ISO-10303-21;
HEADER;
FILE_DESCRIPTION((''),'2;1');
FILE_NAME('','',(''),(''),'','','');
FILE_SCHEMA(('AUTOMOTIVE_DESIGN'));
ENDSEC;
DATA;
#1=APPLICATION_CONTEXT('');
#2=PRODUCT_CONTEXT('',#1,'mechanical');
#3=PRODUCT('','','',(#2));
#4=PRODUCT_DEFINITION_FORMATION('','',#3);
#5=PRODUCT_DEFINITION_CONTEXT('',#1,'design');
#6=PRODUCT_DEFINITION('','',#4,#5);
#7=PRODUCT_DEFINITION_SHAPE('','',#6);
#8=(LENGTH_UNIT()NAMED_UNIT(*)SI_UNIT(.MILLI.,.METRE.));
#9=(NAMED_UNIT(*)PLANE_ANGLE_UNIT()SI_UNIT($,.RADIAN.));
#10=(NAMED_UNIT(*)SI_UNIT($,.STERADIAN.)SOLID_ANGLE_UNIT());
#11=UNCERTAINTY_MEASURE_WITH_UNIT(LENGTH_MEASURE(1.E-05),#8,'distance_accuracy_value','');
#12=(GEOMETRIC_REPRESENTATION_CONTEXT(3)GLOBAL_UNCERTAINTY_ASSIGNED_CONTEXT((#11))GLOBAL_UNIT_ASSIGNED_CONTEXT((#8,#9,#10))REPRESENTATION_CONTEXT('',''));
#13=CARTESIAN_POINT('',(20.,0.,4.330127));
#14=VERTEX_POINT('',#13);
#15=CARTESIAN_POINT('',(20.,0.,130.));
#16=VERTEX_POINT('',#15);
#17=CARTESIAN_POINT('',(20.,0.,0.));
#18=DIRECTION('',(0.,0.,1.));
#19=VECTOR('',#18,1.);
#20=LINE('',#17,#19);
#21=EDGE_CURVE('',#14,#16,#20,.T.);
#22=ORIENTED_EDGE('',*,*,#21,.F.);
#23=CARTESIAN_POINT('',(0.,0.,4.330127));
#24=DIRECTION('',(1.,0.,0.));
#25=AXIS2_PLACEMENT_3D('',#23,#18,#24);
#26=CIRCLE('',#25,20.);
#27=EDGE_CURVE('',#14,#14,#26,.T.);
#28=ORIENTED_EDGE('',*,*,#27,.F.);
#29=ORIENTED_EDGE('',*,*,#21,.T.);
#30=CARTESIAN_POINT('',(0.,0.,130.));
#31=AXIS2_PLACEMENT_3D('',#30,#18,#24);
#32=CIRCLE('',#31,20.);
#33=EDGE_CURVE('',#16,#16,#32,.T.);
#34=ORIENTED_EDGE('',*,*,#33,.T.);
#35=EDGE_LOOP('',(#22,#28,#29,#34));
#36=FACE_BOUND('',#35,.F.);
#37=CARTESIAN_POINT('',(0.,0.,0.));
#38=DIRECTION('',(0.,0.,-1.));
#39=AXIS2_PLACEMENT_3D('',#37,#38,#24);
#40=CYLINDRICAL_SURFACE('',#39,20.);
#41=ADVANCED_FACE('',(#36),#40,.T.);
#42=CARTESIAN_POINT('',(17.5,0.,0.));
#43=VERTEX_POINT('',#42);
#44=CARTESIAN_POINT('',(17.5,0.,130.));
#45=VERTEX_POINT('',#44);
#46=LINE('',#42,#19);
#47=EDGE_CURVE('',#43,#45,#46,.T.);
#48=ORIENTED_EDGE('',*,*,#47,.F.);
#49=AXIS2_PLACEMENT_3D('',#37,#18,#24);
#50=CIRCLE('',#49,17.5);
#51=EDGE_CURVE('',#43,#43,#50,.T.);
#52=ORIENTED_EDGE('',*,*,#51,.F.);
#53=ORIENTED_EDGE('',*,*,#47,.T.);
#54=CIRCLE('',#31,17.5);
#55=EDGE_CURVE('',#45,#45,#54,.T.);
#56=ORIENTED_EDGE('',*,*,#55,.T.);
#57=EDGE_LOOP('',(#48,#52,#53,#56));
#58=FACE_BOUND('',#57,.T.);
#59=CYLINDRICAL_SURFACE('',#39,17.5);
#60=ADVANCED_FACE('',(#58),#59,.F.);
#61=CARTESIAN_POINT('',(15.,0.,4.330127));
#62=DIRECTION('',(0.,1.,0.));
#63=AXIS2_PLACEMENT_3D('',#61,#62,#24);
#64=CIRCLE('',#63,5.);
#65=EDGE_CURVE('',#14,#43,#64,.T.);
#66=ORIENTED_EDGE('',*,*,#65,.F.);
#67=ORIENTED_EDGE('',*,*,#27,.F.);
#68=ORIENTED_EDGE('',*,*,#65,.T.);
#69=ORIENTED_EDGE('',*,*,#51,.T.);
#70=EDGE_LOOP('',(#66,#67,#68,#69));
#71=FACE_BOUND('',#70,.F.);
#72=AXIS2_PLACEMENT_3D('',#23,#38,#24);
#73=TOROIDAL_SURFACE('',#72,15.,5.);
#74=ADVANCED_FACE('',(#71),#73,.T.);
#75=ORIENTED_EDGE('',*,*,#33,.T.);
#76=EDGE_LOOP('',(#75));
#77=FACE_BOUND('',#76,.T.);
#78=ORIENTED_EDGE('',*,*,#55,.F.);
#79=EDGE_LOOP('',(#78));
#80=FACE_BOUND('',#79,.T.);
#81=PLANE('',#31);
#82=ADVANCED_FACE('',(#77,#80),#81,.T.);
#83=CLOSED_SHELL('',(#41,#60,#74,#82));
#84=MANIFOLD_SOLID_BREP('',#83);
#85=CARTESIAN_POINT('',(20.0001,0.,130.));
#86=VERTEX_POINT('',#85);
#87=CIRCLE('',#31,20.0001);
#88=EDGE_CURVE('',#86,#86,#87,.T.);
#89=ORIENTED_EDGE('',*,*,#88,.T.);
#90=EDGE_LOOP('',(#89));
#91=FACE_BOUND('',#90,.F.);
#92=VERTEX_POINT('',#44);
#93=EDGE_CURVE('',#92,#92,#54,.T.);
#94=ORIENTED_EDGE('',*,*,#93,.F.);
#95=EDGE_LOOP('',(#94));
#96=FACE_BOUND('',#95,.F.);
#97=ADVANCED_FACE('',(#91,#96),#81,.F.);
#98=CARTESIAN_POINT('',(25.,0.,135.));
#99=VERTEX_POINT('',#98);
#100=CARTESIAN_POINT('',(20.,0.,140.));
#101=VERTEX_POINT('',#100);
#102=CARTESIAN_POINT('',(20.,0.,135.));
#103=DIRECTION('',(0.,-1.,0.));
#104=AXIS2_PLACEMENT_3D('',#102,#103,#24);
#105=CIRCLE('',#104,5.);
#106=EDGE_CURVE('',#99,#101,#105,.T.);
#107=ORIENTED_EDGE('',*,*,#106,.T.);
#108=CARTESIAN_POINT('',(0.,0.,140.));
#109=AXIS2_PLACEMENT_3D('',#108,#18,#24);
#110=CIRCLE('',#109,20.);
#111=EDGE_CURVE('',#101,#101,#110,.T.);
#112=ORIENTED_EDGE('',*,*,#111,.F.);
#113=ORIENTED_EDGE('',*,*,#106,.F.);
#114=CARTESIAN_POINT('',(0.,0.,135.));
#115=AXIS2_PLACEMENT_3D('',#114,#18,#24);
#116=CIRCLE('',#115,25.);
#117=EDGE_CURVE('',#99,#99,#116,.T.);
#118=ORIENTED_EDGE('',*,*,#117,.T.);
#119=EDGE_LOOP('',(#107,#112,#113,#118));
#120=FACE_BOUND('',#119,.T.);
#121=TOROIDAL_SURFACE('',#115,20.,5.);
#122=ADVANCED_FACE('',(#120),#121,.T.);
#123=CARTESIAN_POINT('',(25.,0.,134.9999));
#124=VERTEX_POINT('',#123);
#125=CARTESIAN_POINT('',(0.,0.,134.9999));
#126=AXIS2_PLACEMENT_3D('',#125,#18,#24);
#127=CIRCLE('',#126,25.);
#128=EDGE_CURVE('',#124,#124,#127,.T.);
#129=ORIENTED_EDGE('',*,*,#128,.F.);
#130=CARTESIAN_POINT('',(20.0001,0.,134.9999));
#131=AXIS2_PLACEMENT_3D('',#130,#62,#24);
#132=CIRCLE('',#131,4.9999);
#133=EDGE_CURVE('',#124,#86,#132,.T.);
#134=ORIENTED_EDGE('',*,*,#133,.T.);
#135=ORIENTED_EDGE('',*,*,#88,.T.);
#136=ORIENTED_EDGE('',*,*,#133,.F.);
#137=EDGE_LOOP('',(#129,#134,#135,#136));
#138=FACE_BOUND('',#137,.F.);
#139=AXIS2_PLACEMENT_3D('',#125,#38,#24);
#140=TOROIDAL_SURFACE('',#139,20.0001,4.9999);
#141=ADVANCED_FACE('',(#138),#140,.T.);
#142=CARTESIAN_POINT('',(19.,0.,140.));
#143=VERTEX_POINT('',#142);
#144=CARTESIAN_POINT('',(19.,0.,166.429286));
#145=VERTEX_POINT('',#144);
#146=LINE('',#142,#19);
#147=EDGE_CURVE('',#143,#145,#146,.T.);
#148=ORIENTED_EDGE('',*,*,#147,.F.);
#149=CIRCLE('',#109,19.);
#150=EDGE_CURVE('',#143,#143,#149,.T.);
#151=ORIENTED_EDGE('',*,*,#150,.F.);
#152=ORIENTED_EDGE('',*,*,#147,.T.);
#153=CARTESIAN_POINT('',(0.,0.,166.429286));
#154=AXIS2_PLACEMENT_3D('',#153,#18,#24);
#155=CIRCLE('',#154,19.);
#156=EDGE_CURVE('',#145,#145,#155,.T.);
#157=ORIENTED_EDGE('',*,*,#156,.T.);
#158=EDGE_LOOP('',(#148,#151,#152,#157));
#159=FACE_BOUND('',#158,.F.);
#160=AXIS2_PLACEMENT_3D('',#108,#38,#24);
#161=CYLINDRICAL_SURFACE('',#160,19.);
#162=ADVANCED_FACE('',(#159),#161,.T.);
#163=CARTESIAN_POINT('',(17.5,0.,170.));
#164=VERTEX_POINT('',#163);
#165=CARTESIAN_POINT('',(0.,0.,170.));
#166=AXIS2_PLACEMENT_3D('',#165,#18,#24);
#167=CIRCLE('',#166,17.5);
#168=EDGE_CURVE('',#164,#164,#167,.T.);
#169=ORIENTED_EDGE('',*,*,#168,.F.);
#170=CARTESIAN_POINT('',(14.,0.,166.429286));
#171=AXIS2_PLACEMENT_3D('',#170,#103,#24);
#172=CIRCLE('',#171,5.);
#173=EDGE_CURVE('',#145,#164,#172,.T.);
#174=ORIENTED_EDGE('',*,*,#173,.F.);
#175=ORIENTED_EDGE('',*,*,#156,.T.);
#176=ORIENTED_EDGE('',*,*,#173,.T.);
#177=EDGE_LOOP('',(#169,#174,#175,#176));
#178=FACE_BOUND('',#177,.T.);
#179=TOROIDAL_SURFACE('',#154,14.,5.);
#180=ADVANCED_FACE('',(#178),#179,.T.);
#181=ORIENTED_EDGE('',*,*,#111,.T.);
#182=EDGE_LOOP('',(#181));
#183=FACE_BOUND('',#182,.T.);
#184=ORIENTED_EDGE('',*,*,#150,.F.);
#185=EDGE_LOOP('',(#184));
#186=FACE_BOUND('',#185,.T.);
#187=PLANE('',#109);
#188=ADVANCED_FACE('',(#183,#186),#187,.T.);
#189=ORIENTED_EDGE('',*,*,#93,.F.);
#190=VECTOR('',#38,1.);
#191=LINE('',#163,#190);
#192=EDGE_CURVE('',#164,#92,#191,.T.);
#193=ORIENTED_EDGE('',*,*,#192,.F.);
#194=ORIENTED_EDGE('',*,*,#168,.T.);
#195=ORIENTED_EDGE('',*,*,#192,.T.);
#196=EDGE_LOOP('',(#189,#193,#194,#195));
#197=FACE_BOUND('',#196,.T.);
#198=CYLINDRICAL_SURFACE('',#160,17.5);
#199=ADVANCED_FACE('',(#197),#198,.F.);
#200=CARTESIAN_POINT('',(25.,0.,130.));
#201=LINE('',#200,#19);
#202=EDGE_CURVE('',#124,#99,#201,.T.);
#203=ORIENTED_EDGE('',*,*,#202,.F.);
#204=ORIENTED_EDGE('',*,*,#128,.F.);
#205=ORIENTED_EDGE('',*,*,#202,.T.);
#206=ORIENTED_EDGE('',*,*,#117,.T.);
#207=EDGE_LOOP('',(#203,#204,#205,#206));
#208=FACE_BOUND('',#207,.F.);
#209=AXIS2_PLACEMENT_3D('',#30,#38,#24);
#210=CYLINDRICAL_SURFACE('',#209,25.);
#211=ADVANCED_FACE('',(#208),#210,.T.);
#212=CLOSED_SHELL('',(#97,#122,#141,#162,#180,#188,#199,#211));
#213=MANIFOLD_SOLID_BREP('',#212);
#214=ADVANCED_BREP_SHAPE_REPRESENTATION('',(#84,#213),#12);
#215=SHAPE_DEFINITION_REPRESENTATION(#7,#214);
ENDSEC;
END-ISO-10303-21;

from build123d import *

# Parameters (mm, degrees)
F0_R      = 20
F0_R_2    = 17.5
F1_DEPTH  = 130
F2_R      = 25
F2_R_2    = 20
F2_R_3    = 17.5
F3_DEPTH  = 10
F4_R      = 19
F4_R_2    = 17.5
F5_DEPTH  = 30
F6_2_F1_R = 5
F6_2_F2_R = 4.9999


# Not quite as in the source:
# - a fillet or chamfer that OpenCascade refuses, or shapes differently, is made with other operations: its cross-section is extruded or revolved along the edge and cut away or added
# - a fillet or chamfer is up to 0.001 mm smaller than in the source, because OpenCascade refuses the exact size
# - a feature names something its author has since deleted; it is built from what else it names


with BuildPart() as f1:
    # F0 (on Top) → F1 (new body)
    with BuildSketch(Plane.XY):
        Circle(F0_R)
        Circle(F0_R_2, mode=Mode.SUBTRACT)
    extrude(amount=F1_DEPTH)

    # F6: fillet of radius 5 on 1 edges, made by hand

    # F6_s1 → F6_t2 (revolve, cut)
    with BuildSketch(Plane.XZ):
        with BuildLine():
            ThreePointArc((20, 4.3301270189), (19.3301270189, 1.8301270189), (17.5, 0))
            Line((17.5, 0), (20, 0))
            Line((20, 0), (20, 4.3301270189))
        make_face()
    revolve(axis=Axis((0, 0, 0), (0, 0, 1)), mode=Mode.SUBTRACT)


with BuildPart() as f3:
    # F2 (on face) → F3 (new body)
    with BuildSketch(Plane.XY.offset(130)):
        Circle(F2_R)
        Circle(F2_R_2, mode=Mode.SUBTRACT)
        Circle(F2_R_2)
        Circle(F2_R_3, mode=Mode.SUBTRACT)
    extrude(amount=F3_DEPTH)

    # F4 (on face) → F5 (join)
    with BuildSketch(Plane.XY.offset(140)):
        Circle(F4_R)
        Circle(F4_R_2, mode=Mode.SUBTRACT)
    extrude(amount=F5_DEPTH)

    # F6#2: fillet of radius 5 on 2 edges, made by hand

    # F6_2_f1
    f6_2_f1_edges = [f3.edges().sort_by_distance(p)[0] for p in [
        (-25, 0, 140),
    ]]
    fillet(f6_2_f1_edges, radius=F6_2_F1_R)

    # F6_2_f2 (radius 5 in the source; OpenCascade refuses exactly that, so slightly less here)
    f6_2_f2_edges = [f3.edges().sort_by_distance(p)[0] for p in [
        (-25, 0, 130),
    ]]
    fillet(f6_2_f2_edges, radius=F6_2_F2_R)

    # F7: fillet of radius 5 on 1 edges, made by hand

    # F7_s1 → F7_t2 (revolve, cut)
    with BuildSketch(Plane.XZ):
        with BuildLine():
            ThreePointArc((19, 166.4292857857), (18.6097722286, 168.3657774588), (17.5, 170))
            Line((17.5, 170), (19, 170))
            Line((19, 170), (19, 166.4292857857))
        make_face()
    revolve(axis=Axis((0, 0, 170), (0, 0, 1)), mode=Mode.SUBTRACT)


solid = Compound([f1.part, f3.part])
